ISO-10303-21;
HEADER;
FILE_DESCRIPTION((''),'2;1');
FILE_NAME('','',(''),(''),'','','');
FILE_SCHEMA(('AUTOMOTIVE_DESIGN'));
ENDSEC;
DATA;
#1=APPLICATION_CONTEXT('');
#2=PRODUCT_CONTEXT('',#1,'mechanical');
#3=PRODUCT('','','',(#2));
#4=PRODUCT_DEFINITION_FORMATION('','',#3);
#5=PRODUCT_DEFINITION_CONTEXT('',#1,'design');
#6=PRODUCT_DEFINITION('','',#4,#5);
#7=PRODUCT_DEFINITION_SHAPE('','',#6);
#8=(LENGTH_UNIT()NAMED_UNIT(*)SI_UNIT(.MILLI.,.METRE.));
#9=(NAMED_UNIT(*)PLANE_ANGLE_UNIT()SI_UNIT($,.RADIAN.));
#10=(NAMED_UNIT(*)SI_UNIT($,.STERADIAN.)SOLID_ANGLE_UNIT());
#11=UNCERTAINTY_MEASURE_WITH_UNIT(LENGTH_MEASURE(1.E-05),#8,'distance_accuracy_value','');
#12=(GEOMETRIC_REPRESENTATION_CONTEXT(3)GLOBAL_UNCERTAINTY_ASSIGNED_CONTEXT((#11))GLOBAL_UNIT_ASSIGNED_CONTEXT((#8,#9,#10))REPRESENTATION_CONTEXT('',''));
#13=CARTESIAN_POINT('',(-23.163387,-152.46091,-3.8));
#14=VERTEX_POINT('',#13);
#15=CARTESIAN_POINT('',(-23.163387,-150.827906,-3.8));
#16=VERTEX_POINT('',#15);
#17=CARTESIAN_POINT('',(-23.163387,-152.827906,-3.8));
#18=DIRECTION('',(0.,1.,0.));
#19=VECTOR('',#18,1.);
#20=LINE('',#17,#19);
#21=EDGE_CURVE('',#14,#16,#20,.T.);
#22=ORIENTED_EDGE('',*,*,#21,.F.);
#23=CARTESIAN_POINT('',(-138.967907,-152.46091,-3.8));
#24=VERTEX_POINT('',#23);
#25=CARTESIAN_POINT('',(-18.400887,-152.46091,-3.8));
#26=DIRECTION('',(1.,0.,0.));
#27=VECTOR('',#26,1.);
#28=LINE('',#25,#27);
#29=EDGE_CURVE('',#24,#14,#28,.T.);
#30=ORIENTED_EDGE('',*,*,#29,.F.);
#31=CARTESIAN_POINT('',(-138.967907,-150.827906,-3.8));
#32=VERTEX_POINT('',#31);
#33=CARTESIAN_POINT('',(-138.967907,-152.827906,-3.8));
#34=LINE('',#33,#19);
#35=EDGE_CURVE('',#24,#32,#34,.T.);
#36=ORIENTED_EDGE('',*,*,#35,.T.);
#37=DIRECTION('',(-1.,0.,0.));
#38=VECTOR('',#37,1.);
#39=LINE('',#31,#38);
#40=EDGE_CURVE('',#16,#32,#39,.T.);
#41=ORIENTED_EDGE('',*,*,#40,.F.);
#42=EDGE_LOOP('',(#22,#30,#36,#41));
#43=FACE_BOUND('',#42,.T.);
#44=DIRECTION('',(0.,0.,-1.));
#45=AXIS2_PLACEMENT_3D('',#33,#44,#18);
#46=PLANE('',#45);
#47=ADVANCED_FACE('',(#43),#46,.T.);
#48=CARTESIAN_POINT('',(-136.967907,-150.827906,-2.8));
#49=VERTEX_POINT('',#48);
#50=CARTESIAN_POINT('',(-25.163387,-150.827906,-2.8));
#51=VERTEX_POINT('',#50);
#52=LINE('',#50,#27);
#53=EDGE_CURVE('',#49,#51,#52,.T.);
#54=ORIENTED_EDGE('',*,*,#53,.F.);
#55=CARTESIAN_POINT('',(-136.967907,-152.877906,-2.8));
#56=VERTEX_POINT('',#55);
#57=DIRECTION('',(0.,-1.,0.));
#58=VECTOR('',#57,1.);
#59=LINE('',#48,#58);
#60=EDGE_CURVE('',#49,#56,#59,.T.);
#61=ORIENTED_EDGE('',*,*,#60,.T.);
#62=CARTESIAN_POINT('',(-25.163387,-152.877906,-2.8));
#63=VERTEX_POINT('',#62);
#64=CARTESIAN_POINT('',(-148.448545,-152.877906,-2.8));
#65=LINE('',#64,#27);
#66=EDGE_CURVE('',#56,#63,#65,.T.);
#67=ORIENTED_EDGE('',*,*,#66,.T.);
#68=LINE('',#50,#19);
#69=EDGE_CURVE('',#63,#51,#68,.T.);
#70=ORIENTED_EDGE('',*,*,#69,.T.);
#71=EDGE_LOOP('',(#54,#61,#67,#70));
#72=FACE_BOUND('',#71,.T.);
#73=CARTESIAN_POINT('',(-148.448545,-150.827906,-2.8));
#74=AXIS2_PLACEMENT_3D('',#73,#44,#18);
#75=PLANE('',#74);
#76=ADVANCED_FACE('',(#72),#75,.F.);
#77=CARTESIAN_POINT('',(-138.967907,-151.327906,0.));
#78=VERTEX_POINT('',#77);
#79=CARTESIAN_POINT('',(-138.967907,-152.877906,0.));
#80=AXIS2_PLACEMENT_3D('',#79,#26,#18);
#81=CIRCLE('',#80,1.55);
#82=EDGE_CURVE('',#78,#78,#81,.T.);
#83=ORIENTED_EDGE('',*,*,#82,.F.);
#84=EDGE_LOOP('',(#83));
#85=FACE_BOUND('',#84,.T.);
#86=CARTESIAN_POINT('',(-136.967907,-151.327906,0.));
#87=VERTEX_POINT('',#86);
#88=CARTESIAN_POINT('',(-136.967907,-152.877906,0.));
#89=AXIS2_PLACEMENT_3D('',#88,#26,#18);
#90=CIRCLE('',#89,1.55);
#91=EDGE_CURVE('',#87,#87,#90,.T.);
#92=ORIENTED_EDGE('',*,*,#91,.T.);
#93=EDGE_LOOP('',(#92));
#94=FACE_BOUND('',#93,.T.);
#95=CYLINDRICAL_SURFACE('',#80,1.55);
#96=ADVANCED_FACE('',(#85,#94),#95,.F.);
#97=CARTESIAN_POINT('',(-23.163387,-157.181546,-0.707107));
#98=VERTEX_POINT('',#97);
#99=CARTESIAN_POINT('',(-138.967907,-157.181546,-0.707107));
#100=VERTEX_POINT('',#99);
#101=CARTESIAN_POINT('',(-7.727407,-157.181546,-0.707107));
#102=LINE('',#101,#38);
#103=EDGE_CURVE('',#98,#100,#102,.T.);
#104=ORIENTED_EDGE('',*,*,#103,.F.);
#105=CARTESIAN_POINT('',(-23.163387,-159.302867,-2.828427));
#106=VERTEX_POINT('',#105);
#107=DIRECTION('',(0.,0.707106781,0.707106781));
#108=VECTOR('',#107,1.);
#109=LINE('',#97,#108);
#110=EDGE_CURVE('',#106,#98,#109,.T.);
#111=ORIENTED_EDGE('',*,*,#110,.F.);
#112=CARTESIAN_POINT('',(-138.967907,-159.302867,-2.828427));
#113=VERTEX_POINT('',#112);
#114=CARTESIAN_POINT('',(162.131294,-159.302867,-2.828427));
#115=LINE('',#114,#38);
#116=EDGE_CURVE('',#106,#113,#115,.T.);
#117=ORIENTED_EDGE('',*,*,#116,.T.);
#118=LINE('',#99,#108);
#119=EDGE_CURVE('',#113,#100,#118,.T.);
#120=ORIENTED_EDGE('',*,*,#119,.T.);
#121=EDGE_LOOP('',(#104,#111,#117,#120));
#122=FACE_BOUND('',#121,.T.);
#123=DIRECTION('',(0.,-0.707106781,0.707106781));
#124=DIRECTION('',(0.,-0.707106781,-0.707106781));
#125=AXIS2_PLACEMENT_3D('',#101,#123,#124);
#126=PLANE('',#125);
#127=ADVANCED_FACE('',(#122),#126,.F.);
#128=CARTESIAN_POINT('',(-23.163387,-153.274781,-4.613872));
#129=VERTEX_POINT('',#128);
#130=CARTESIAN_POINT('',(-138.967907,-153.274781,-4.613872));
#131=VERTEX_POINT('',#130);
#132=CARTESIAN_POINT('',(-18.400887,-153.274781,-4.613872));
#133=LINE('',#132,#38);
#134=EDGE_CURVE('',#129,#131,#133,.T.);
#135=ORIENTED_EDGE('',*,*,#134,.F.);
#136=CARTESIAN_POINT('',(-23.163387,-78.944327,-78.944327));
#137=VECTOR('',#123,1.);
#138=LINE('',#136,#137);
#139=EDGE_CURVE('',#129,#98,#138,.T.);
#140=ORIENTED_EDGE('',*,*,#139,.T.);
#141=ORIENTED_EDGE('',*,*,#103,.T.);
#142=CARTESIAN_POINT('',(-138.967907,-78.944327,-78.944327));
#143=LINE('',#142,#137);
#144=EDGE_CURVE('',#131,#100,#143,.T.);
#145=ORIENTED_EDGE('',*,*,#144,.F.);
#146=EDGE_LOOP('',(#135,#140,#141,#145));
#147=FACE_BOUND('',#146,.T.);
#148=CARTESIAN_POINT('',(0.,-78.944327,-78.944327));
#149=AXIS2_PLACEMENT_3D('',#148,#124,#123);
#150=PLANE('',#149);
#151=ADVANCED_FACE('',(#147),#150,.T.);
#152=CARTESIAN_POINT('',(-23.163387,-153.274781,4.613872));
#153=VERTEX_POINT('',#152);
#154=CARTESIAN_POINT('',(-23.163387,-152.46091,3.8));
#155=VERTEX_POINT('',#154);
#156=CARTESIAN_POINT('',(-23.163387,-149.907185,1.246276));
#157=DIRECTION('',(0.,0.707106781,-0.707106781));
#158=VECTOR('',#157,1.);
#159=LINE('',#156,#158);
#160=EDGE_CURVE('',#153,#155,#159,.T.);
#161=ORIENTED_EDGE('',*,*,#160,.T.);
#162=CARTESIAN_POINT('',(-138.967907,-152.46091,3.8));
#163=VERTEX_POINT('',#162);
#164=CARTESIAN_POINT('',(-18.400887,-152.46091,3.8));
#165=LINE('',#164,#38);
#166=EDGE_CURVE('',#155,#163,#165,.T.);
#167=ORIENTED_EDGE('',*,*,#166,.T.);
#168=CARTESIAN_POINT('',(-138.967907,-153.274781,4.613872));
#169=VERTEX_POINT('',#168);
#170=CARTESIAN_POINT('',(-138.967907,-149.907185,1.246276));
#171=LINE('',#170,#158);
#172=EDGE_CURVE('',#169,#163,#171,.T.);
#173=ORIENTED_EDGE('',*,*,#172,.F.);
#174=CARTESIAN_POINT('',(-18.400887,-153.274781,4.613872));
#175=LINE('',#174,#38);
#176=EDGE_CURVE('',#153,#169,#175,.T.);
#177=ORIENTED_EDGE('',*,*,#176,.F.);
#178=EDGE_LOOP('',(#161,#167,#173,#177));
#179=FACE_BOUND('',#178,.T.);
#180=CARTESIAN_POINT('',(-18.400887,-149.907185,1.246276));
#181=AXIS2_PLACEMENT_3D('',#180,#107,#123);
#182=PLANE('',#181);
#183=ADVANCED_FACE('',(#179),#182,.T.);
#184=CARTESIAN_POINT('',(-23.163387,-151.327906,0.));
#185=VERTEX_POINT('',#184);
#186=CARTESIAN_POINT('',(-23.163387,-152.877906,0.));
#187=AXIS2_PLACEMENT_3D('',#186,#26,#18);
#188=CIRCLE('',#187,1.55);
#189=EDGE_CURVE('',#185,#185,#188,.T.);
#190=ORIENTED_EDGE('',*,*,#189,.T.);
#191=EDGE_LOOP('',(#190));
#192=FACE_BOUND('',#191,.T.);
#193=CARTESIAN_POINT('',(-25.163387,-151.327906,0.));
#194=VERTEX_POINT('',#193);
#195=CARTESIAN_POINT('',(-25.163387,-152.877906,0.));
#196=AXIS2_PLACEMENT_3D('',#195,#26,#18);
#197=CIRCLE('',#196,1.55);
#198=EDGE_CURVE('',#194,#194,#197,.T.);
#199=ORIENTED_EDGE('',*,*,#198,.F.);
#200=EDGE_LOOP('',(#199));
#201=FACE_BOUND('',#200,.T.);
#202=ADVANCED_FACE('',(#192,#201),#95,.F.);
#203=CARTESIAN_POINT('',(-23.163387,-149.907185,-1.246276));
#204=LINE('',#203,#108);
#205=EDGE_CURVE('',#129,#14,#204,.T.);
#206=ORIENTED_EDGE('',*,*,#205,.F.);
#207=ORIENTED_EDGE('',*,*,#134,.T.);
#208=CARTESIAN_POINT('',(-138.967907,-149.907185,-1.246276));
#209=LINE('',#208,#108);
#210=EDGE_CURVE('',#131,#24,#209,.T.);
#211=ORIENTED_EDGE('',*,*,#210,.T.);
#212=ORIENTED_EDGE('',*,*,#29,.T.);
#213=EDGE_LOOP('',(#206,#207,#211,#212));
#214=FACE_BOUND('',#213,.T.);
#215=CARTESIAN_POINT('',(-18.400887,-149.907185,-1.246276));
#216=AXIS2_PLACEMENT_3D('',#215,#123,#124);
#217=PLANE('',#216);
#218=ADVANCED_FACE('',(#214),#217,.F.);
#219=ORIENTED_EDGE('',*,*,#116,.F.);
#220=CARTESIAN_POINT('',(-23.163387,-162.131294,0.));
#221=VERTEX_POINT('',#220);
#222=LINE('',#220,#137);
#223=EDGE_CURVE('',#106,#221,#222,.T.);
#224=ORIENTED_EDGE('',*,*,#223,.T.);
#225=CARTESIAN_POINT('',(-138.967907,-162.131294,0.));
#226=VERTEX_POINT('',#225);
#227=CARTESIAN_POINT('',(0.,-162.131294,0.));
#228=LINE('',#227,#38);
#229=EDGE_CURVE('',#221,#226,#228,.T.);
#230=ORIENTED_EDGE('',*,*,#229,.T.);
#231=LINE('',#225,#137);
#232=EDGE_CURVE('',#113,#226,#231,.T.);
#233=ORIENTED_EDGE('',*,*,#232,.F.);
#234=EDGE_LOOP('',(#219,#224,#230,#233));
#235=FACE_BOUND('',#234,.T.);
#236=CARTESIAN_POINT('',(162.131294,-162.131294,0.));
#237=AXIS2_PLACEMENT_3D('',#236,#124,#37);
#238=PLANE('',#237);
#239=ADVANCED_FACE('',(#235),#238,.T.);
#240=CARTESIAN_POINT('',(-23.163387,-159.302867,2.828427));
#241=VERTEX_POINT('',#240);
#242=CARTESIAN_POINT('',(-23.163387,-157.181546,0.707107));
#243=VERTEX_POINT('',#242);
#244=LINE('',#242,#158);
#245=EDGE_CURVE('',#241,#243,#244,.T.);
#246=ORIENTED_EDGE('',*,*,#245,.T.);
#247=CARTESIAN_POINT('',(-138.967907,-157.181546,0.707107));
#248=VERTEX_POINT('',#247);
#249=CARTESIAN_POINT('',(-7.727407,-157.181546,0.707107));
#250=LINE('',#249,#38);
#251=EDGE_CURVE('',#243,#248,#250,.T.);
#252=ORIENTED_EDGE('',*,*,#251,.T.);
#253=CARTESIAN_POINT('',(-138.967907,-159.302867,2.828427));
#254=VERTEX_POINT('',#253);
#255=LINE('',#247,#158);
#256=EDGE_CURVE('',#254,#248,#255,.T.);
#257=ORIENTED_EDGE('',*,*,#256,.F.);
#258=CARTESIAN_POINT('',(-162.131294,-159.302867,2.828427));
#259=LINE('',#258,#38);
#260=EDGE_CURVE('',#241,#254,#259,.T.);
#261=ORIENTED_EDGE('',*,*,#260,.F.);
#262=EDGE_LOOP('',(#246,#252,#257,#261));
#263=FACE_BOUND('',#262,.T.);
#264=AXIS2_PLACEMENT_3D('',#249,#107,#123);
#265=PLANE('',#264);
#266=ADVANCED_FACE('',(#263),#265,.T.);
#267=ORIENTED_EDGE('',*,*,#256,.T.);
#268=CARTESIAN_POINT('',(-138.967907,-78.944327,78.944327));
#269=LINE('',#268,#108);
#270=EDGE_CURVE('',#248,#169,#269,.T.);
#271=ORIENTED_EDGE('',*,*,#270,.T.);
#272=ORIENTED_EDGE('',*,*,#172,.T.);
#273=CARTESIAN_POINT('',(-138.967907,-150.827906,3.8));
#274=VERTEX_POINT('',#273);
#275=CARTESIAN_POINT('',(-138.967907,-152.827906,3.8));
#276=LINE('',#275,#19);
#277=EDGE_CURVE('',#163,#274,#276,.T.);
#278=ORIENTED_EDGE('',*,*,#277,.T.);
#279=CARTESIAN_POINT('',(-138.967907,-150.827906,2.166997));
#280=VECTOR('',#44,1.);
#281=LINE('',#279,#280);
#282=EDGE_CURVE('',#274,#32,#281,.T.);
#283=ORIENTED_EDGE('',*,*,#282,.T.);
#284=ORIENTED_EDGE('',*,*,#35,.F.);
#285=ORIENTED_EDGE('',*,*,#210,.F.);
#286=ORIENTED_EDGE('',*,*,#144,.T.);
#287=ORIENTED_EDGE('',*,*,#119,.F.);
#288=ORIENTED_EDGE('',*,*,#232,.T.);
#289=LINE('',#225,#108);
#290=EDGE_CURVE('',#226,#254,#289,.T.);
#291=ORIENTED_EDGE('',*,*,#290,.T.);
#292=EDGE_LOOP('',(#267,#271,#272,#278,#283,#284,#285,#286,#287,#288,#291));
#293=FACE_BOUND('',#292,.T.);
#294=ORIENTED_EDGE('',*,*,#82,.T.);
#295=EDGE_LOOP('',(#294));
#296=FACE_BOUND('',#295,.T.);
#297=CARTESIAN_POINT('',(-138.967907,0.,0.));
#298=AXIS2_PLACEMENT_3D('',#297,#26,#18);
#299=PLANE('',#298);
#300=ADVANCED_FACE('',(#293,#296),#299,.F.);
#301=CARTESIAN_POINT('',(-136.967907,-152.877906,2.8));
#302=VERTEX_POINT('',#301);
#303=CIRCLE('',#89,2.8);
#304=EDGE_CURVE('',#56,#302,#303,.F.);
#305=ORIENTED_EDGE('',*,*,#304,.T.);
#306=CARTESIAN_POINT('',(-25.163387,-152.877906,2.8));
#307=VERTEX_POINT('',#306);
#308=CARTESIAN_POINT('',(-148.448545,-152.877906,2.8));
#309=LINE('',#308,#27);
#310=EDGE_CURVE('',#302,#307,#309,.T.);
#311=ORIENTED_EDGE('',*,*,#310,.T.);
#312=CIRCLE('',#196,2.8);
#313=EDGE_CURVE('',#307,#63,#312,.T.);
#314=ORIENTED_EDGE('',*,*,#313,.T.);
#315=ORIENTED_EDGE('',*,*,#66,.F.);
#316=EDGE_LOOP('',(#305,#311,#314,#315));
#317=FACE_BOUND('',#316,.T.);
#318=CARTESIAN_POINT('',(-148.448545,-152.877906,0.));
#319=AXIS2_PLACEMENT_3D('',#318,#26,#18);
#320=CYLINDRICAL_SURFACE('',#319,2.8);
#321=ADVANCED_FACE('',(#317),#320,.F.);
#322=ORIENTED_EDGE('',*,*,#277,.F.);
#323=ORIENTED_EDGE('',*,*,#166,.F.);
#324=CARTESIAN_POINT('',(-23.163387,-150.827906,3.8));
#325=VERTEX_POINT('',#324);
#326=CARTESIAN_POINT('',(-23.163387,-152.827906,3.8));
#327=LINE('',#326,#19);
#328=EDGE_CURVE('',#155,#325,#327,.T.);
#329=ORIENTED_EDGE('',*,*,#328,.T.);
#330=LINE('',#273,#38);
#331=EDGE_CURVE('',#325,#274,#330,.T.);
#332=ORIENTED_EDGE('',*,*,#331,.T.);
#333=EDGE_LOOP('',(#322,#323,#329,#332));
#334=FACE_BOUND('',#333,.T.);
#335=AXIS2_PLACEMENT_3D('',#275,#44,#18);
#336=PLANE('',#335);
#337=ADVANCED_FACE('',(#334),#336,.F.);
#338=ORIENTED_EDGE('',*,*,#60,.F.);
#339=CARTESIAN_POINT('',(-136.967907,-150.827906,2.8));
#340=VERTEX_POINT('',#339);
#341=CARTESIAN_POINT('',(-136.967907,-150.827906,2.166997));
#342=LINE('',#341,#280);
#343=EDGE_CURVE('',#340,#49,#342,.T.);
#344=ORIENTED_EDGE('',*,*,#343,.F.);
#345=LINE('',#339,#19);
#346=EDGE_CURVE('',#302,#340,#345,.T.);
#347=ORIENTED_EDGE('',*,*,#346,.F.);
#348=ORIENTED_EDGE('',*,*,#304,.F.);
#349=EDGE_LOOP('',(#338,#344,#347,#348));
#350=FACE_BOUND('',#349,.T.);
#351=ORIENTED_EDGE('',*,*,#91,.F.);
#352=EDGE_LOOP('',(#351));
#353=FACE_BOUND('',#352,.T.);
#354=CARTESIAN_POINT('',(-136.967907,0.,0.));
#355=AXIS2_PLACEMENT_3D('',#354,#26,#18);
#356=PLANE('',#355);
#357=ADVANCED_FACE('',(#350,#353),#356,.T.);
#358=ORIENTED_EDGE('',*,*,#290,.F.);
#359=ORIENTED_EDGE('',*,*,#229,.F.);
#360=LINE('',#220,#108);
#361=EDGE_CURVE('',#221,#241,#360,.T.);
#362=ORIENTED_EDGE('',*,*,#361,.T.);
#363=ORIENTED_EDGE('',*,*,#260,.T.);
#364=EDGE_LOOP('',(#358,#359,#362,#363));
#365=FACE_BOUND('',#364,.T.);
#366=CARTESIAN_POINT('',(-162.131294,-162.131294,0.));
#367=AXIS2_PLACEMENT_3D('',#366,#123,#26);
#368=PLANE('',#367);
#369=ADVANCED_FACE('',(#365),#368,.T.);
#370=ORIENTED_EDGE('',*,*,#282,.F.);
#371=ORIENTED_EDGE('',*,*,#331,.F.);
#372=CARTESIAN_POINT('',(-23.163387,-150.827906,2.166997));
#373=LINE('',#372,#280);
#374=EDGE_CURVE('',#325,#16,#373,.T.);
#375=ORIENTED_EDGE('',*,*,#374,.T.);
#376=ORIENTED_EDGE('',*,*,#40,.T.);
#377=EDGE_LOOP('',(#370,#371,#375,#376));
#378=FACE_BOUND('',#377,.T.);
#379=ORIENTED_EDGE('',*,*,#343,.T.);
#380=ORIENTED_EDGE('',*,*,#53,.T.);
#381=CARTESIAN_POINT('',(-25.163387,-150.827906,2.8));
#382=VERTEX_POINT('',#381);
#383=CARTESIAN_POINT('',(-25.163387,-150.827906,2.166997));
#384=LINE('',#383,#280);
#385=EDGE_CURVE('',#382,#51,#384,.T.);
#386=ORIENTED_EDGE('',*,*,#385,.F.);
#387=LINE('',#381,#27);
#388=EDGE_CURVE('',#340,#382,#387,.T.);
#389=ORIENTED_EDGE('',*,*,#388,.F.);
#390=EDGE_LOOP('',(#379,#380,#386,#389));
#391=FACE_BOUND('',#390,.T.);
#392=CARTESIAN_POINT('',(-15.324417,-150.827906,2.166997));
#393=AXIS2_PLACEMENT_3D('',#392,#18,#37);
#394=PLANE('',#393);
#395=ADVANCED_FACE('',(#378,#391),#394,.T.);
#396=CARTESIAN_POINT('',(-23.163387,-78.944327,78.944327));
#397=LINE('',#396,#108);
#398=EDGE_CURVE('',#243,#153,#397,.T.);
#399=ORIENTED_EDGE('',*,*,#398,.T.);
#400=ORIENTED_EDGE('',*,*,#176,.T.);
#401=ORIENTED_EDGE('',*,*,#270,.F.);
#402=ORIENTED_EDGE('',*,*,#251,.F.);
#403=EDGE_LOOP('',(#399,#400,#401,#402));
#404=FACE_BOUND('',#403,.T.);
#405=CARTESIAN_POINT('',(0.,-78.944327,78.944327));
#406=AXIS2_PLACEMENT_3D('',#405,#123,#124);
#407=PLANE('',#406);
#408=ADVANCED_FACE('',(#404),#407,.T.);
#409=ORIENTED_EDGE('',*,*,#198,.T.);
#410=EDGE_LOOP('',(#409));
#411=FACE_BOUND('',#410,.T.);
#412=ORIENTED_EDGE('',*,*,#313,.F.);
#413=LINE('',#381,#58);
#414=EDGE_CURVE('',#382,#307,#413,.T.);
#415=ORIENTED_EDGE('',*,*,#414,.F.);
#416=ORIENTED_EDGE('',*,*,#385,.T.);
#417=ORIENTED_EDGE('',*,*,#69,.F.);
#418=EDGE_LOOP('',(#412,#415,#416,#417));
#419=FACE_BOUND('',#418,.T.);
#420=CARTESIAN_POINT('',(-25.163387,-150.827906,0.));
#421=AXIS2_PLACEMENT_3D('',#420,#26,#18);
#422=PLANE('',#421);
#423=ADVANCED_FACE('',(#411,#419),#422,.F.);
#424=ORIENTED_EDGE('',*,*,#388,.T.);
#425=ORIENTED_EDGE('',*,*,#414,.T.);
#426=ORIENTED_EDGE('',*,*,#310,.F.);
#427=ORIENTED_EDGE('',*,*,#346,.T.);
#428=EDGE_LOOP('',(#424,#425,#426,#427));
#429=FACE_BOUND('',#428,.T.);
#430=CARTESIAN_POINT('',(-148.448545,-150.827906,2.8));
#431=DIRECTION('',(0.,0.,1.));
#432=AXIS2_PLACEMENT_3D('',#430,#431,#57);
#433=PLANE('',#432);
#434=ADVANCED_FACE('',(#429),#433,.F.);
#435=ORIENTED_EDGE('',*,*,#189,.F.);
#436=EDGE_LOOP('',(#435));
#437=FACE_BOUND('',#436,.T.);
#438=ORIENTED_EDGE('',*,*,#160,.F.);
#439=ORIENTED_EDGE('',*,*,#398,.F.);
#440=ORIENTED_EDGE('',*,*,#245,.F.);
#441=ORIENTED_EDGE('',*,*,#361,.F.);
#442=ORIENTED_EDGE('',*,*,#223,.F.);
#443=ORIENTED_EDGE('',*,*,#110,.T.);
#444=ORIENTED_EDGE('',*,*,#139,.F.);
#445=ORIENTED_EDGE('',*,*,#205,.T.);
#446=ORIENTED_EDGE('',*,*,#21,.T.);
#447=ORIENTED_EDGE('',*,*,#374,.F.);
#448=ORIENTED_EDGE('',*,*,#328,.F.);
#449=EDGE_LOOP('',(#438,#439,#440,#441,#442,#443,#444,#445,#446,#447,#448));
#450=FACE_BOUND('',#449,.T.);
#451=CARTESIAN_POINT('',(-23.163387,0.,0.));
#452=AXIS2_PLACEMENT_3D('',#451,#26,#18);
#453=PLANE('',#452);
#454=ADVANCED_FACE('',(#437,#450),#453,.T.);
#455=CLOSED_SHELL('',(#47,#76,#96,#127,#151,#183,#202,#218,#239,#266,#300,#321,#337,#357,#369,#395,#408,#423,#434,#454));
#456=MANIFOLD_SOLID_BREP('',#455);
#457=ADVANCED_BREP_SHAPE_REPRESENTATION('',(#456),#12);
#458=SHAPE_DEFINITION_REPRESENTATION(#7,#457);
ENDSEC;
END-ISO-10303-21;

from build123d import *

# Parameters (mm, degrees)
STOCK_PFRD_START               = -138.967906757
STOCK_PFRD_JOINER_BASE_1_DEPTH = 115.804519766
BOSS_EXTRUDE1_DEPTH            = 115.804519766
CUT_EXTRUDE1_START             = -2
SKETCH3_R                      = 1.55
CUT_EXTRUDE1_DEPTH             = 111.804519766
CUT_EXTRUDE2_DEPTH             = 200.295085296
CUT_EXTRUDE2_DEPTH_BACK        = 200.295085296
SKETCH3_2_R                    = 1.55
BOSS_EXTRUDE2_DEPTH            = 2


# Read off the part's stored shape, not the designer's step: Stock-PFRD - Joiner Base-1
with BuildPart() as part:
    # Stock-PFRD - Joiner Base-1 outline → Stock-PFRD - Joiner Base-1 (new body)
    with BuildSketch(Plane.YZ.offset(STOCK_PFRD_START)):
        Polygon((-152.481031246, -3.820121679), (-152.491152925, -3.81), (-152.491152925, 3.81), (-152.481031246, 3.820121679), (-153.274781314, 4.613871747), (-157.18154628, 0.707106781), (-159.302866623, 2.828427125), (-162.131293748, 0), (-159.302866623, -2.828427125), (-157.18154628, -0.707106781), (-153.274781314, -4.613871747), align=None)
    extrude(amount=STOCK_PFRD_JOINER_BASE_1_DEPTH)

    # Sketch2 → Boss-Extrude1 (add)
    with BuildSketch(Plane.ZY.offset(138.967906757)):
        Polygon((3.830243359, -152.491152925), (2.166996747, -150.827906314), (-2.166996747, -150.827906314), (-3.830243359, -152.491152925), (3.81, -152.491152925), align=None)
    extrude(amount=-BOSS_EXTRUDE1_DEPTH)

    # Sketch3 → Cut-Extrude1 (cut)
    with BuildSketch(Plane(origin=(-23.163386991, 0, 0), x_dir=(0, 0, -1), z_dir=(1, 0, 0)).offset(CUT_EXTRUDE1_START)):
        with BuildLine():
            Line((2.8, -150.827906314), (2.8, -152.877906314))
            ThreePointArc((2.8, -152.877906314), (0, -155.677906314), (-2.8, -152.877906314))
            Line((-2.8, -152.877906314), (-2.8, -150.827906314))
            ThreePointArc((-2.8, -150.827906314), (0, -148.027906314), (2.8, -150.827906314))
        make_face()
        with Locations(Location((0, -152.877906314, 0), (0, 0, 90))):
            Circle(SKETCH3_R, mode=Mode.SUBTRACT)
    extrude(amount=-CUT_EXTRUDE1_DEPTH, mode=Mode.SUBTRACT)

    # Sketch3<2> → Cut-Extrude2 (cut, two sides: drawn at the far end of the back side and taken through both)
    with BuildSketch(Plane(origin=(-23.163386991, 0, 0), x_dir=(0, 0, -1), z_dir=(1, 0, 0)).offset(-CUT_EXTRUDE2_DEPTH_BACK)):
        with Locations(Location((0, -152.877906314, 0), (0, 0, 90))):
            Circle(SKETCH3_2_R)
    extrude(amount=CUT_EXTRUDE2_DEPTH + CUT_EXTRUDE2_DEPTH_BACK, mode=Mode.SUBTRACT)

    # Sketch4 → Boss-Extrude2 (add)
    with BuildSketch(Plane(origin=(0, -150.827906314, 0), x_dir=(1, 0, 0), z_dir=(0, 1, 0))):
        Polygon((-138.967906757, 2.166996747), (-136.967906757, 2.166996747), (-136.967906757, 2.8), (-25.163386991, 2.8), (-25.163386991, 2.166996747), (-23.163386991, 2.166996747), (-23.163386991, 3.8), (-138.967906757, 3.8), align=None)
    boss_extrude2 = extrude(amount=-BOSS_EXTRUDE2_DEPTH)

    # Mirror1: Boss-Extrude2 across plane
    add(boss_extrude2.mirror(Plane(origin=(0, 0, 0), x_dir=(1, 0, 0), z_dir=(0, 0, -1))))


solid = part.part
